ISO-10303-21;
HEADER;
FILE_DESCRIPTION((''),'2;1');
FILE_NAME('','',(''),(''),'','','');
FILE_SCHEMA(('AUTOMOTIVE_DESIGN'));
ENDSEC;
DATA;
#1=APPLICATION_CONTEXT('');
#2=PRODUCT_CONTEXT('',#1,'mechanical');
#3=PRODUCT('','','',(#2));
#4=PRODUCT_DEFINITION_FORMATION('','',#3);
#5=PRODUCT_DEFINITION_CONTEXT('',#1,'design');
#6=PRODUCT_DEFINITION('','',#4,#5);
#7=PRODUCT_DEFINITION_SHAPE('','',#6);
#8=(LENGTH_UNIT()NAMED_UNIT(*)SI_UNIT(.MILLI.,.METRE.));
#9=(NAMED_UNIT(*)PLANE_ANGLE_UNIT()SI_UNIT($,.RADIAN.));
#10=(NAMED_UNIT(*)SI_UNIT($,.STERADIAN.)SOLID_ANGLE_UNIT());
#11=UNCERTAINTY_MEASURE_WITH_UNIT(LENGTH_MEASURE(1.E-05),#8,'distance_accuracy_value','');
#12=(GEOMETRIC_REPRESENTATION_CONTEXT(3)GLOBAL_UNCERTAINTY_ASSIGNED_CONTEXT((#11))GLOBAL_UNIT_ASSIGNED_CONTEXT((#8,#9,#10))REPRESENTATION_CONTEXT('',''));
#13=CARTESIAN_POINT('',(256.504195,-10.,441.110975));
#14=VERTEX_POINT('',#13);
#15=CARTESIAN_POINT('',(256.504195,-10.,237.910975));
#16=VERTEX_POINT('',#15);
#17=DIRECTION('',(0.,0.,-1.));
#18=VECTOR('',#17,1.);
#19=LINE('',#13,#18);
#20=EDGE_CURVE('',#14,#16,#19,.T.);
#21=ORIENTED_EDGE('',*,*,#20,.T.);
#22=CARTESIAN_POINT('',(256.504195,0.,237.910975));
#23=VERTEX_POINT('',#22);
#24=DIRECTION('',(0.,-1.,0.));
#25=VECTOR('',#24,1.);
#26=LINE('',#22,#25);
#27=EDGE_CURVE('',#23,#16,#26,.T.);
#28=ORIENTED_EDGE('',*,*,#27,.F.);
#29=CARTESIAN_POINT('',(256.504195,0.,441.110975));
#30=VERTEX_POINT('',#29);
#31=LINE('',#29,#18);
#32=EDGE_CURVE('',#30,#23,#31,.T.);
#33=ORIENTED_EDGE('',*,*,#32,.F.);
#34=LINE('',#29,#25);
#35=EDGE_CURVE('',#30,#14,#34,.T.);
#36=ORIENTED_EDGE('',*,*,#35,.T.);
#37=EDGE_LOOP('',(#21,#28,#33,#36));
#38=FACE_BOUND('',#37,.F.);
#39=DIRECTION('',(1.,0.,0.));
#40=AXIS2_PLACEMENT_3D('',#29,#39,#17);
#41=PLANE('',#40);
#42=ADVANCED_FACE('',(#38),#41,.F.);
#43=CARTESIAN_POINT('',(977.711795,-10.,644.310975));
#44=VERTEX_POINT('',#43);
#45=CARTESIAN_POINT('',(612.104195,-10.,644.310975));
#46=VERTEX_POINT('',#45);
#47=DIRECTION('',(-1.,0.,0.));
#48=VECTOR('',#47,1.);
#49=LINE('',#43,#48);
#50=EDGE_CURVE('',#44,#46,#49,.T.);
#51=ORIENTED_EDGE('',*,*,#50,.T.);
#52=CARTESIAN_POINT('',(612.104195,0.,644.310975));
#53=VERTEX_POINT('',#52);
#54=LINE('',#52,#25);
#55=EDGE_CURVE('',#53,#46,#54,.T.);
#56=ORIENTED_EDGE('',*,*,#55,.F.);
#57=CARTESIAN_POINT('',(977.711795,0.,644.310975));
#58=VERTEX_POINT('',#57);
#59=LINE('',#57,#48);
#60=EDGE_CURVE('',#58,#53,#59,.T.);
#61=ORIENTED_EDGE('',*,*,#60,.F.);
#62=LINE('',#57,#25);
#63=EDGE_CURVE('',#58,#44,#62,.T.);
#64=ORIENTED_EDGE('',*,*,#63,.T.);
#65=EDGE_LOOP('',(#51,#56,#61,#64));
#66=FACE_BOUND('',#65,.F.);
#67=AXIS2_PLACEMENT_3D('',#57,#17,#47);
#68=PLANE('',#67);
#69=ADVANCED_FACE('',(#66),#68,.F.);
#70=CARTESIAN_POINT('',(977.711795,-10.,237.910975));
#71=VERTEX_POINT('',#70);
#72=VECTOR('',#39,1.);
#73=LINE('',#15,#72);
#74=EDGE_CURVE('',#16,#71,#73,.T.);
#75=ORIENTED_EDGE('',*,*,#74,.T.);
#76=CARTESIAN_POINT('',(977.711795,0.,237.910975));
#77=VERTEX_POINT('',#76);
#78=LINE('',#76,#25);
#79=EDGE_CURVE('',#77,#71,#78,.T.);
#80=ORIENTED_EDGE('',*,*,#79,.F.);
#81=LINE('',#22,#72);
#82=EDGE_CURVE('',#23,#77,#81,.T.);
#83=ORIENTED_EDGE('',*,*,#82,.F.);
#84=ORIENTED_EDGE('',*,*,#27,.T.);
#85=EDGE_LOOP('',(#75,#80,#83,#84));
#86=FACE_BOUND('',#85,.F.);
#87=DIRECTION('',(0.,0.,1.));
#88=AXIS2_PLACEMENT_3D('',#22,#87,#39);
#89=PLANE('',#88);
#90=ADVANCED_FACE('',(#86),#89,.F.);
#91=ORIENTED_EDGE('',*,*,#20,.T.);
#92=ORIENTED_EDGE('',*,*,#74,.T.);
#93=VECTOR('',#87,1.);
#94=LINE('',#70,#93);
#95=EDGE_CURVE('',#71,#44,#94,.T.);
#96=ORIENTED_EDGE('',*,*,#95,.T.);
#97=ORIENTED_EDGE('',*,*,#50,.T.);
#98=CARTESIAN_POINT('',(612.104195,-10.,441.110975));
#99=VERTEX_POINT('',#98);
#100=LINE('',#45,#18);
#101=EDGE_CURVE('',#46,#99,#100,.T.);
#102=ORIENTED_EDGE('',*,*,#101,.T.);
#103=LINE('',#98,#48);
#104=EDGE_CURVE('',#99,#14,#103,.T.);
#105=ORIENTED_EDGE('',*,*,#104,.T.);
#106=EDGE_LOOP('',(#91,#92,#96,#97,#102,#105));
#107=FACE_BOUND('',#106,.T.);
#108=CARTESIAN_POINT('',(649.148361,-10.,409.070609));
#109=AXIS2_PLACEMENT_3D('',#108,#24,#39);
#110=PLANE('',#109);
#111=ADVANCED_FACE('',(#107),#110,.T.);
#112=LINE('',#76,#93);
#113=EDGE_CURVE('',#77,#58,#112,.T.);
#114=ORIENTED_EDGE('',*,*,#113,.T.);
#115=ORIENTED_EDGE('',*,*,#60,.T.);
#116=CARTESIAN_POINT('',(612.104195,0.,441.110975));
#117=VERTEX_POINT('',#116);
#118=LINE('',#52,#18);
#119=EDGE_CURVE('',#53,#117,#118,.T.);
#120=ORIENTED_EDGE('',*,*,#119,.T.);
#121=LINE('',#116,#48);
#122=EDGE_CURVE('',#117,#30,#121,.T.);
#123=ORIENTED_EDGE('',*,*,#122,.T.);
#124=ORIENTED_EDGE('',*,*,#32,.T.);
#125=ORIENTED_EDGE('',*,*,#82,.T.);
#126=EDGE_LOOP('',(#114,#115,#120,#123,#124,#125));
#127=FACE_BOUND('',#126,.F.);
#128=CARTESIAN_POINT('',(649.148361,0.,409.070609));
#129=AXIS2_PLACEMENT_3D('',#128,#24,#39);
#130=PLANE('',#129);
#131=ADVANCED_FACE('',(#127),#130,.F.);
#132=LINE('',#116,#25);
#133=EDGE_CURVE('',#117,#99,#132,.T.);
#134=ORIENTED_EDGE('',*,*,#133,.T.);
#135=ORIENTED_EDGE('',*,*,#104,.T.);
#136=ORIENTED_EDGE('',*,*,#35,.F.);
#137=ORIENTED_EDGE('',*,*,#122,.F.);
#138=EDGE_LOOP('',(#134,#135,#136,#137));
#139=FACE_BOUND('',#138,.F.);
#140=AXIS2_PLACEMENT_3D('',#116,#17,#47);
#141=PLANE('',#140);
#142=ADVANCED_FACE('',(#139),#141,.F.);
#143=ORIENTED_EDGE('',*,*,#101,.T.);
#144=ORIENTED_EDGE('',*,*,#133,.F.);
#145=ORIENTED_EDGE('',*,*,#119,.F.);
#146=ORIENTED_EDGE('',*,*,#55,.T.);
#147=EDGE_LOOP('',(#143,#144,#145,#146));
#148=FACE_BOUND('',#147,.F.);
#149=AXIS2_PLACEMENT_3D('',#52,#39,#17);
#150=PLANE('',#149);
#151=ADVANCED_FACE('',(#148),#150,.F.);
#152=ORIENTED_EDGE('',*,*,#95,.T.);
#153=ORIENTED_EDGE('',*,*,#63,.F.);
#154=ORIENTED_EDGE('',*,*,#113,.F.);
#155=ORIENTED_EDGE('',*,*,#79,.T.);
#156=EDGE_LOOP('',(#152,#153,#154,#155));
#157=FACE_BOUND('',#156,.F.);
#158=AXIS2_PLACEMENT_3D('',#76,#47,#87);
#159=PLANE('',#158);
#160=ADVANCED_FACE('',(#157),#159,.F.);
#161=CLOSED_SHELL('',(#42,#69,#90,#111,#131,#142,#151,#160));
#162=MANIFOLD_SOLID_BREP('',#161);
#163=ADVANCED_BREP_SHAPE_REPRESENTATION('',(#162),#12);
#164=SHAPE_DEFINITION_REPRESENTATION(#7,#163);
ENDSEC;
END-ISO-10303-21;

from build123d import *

# Parameters (mm, degrees)
F1_DEPTH = 10


# Not quite as in the source:
# - a feature names something its author has since deleted; it is built from what else it names


with BuildPart() as f1:
    # F0 (on Front) → F1 (new body)
    with BuildSketch(Plane.XZ):
        Polygon((256.5041949631, 441.1109750425), (256.5041949631, 237.9109750425), (977.7117949631, 237.9109750425), (977.7117949631, 644.3109750425), (612.1041949631, 644.3109750425), (612.1041949631, 441.1109750425), align=None)
    extrude(amount=F1_DEPTH)


solid = f1.part
